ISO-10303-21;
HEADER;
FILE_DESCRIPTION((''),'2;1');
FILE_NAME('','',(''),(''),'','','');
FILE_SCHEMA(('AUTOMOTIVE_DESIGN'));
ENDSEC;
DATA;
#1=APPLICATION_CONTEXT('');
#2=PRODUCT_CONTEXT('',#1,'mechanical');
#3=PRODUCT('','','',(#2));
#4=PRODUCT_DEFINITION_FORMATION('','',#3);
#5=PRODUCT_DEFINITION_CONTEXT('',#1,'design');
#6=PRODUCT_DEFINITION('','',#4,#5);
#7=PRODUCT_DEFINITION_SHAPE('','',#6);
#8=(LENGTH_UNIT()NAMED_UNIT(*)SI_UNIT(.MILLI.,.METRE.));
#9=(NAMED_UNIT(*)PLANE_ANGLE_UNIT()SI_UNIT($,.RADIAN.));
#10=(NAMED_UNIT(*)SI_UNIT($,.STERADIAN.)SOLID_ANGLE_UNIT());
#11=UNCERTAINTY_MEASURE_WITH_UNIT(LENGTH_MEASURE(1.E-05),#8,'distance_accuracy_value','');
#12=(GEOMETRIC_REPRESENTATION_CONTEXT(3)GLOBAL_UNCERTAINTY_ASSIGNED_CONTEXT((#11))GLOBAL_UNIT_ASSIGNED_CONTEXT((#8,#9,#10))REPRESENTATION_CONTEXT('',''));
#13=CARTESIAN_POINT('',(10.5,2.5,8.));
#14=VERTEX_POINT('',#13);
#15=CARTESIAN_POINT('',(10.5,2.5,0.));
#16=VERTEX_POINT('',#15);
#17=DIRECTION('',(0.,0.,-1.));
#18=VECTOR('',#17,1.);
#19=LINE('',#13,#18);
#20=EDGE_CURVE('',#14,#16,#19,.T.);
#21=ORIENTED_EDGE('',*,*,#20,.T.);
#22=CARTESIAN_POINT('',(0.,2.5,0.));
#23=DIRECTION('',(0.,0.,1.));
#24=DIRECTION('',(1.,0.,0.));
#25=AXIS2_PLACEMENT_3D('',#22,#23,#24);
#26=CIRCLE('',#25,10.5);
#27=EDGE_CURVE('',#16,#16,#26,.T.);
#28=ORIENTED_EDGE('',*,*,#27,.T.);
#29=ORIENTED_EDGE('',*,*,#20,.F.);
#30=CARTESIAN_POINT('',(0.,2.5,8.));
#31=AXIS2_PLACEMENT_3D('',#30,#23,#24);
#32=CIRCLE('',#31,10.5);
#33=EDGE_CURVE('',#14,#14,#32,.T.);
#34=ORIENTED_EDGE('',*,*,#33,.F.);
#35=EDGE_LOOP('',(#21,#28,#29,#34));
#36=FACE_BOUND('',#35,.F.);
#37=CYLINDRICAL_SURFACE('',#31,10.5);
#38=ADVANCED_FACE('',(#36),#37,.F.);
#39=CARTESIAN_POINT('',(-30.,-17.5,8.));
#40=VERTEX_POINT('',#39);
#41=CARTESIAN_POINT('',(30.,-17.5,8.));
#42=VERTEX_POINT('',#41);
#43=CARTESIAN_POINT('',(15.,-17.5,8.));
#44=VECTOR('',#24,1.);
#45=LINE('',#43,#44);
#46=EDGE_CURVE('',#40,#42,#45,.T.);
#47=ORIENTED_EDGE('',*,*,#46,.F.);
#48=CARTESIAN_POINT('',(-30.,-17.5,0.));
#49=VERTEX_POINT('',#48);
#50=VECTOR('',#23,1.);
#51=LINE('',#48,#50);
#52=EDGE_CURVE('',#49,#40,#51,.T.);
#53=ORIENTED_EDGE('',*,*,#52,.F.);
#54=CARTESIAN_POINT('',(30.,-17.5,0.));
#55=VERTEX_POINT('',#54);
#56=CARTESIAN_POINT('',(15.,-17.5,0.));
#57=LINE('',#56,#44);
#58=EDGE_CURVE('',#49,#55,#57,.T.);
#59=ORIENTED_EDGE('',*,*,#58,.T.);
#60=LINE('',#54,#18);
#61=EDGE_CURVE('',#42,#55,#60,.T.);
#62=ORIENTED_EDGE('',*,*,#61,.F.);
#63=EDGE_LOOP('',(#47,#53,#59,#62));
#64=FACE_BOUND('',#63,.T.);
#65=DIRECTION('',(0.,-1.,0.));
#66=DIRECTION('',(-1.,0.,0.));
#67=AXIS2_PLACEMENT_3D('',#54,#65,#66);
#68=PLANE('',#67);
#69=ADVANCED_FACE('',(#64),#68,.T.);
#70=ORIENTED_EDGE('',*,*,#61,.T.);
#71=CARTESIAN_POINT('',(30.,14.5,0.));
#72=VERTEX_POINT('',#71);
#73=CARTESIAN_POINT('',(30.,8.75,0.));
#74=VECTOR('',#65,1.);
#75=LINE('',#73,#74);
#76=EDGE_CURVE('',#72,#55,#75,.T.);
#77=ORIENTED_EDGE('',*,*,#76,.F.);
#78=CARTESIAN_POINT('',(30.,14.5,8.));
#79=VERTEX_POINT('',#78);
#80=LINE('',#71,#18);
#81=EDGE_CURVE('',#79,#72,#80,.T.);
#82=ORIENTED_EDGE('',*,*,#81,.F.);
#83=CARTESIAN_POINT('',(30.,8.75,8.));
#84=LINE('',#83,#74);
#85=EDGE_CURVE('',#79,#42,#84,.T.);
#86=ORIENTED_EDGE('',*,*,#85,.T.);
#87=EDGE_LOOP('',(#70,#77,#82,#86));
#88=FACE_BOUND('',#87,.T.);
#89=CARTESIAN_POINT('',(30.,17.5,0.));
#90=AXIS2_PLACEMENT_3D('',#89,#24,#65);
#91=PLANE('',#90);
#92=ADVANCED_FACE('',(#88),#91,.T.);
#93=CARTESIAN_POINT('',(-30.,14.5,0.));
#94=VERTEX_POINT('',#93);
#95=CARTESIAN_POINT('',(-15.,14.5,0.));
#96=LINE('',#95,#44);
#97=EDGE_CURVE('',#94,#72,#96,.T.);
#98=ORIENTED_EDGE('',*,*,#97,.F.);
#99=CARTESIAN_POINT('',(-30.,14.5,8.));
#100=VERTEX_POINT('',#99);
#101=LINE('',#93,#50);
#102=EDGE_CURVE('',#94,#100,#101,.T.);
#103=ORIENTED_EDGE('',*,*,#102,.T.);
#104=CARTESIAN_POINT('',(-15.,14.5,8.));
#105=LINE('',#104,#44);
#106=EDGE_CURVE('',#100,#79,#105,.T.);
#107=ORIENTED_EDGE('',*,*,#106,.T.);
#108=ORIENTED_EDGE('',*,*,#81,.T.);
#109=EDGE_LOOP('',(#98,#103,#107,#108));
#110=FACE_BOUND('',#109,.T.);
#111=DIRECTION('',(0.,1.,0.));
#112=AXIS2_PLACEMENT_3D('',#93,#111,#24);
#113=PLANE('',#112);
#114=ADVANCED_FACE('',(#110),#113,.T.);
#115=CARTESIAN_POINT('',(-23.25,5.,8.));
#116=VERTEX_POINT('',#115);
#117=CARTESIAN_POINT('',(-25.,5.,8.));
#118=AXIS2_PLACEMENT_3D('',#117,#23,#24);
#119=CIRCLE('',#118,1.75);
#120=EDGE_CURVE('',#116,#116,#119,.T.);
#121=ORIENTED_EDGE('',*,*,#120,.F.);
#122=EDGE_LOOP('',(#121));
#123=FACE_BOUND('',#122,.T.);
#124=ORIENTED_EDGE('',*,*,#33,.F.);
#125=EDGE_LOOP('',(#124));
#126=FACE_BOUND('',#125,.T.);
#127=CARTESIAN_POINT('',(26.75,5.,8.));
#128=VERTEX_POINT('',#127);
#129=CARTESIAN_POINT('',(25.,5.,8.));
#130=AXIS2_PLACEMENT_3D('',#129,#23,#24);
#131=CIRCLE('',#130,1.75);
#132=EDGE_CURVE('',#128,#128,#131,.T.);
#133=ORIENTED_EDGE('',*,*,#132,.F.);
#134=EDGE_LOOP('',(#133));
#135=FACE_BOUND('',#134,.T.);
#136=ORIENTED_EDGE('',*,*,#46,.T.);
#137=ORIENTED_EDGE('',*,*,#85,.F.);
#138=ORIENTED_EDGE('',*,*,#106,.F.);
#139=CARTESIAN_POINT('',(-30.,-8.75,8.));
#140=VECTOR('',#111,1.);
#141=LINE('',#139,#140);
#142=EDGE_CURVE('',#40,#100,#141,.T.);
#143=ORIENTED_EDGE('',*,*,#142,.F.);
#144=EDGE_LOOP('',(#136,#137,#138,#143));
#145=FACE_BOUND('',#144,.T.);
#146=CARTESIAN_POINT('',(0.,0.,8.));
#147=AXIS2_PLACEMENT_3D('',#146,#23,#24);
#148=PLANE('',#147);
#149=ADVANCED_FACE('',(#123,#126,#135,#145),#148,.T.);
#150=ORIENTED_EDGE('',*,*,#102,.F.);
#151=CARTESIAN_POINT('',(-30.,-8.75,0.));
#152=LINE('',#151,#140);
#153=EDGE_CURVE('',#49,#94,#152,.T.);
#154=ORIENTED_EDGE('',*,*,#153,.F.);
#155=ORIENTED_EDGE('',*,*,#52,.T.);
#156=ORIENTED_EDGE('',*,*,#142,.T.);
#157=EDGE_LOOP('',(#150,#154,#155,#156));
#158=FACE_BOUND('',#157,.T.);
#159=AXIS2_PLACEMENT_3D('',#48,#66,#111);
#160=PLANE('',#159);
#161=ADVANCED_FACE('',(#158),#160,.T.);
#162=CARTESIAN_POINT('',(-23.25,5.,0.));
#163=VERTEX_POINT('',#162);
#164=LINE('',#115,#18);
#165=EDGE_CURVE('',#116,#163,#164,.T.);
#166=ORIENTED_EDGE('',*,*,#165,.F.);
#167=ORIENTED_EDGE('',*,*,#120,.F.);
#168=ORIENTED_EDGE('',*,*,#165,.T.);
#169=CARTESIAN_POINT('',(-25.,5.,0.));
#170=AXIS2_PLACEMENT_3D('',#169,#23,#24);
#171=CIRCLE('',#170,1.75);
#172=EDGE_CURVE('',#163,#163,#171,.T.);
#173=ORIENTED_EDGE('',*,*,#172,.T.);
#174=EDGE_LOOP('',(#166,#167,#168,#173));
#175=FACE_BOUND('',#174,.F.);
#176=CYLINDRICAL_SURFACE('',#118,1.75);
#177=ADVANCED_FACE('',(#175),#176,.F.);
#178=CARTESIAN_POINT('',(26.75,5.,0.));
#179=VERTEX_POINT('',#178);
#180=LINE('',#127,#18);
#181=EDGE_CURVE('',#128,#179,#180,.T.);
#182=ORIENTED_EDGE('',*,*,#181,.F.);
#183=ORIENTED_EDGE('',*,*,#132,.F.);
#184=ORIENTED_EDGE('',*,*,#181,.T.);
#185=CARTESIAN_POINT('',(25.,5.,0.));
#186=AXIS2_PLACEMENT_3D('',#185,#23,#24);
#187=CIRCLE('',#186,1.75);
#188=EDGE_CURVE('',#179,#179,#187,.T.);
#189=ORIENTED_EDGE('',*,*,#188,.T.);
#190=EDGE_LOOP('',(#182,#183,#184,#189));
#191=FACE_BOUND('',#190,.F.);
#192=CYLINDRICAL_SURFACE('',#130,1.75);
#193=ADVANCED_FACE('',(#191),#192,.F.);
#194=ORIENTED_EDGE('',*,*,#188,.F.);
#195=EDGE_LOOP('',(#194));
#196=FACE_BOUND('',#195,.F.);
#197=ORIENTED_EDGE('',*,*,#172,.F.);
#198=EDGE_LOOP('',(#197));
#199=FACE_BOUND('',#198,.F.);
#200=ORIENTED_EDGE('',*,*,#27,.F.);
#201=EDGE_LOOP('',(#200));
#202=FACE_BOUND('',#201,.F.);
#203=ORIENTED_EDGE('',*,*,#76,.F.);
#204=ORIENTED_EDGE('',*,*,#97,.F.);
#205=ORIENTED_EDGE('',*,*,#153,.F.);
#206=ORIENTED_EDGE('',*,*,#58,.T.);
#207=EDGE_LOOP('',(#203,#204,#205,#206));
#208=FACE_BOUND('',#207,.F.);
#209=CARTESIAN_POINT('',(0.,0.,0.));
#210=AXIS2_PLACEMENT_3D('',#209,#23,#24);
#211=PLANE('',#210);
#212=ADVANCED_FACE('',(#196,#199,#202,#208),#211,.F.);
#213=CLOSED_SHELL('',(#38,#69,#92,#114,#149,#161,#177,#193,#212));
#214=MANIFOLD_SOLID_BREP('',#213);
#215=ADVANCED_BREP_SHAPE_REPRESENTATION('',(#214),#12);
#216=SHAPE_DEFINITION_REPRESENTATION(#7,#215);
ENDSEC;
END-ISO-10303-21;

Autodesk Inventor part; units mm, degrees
ref_plane "YZ Plane" through (0, 0, 0) normal (1, 0, 0) x (0, 1, 0)
ref_plane "XZ Plane" through (0, 0, 0) normal (0, 1, 0) x (-1, 0, 0)
ref_plane "XY Plane" through (0, 0, 0) normal (0, 0, 1) x (1, 0, 0)
sketch "Sketch1" plane through (0, 0, 0) normal (0, 0, 1) x (1, 0, 0)
  line L0 (-30, 17.5) -> (30, 17.5)
  line L1 (30, 17.5) -> (30, -17.5)
  line L2 (30, -17.5) -> (-30, -17.5)
  line L3 (-30, -17.5) -> (-30, 17.5)
  point P0 (0, 0)
  point P1 (0, 17.5)
  point P2 (-30, 0)
  dimension "d0" = 60
  dimension "d1" = 35
extrude "Extrusion1" add sketch "Sketch1" along normal blind 8
sketch "Sketch2" plane through (0, 0, 8) normal (0, 0, 1) x (1, 0, 0)
  line L0 (0, 5) -> (0, 0) construction
  line L1 (-10.5, 5) -> (-10.5, 0)
  line L2 (10.5, 0) -> (10.5, 5)
  arc A0 (10.5, 5) -> (-10.5, 5) centre (0, 5) ccw
  arc A1 (-10.5, 0) -> (10.5, 0) centre (0, 0) ccw
  line L3 (-30, -17.5) -> (30, -17.5) projected
  line L4 (30, 17.5) -> (-30, 17.5) projected
  circle A2 centre (0, 2.5) radius 10.5
  point P0 (0, 0)
  point P1 (0, 17.5)
  dimension "d4" = 5
  dimension "d5" = 21
  dimension "d17" = 21
  dimension "d18" = 15
extrude "Extrusion2" cut sketch "Sketch2" against normal through all contours A2
sketch "Sketch3" plane through (0, 0, 8) normal (0, 0, 1) x (1, 0, 0)
  circle A0 centre (25, 5) radius 1.75
  circle A1 centre (25, 15) radius 1.75
  line L0 (30, 17.5) -> (-30, 17.5) projected
  line L1 (30, -17.5) -> (30, 17.5) projected
  circle A2 centre (-25, 5) radius 1.75
  circle A3 centre (-25, 15) radius 1.75
  line L2 (-30, 17.5) -> (-30, -17.5) projected
  point P0 (0, 0)
  dimension "d9" = 3.5
  dimension "d10" = 3.5
  dimension "d11" = 10
  dimension "d12" = 2.5
  dimension "d13" = 5
  dimension "d14" = 5
extrude "Extrusion3" cut sketch "Sketch3" against normal through all contours A0 | A2
move faces "Move1" translate (0, -3, 0) faces at (10, 17.5, 2.6667)
equation "\"d14\" = d13"
properties part number "0005-10-002 Suport1 Seringa"
